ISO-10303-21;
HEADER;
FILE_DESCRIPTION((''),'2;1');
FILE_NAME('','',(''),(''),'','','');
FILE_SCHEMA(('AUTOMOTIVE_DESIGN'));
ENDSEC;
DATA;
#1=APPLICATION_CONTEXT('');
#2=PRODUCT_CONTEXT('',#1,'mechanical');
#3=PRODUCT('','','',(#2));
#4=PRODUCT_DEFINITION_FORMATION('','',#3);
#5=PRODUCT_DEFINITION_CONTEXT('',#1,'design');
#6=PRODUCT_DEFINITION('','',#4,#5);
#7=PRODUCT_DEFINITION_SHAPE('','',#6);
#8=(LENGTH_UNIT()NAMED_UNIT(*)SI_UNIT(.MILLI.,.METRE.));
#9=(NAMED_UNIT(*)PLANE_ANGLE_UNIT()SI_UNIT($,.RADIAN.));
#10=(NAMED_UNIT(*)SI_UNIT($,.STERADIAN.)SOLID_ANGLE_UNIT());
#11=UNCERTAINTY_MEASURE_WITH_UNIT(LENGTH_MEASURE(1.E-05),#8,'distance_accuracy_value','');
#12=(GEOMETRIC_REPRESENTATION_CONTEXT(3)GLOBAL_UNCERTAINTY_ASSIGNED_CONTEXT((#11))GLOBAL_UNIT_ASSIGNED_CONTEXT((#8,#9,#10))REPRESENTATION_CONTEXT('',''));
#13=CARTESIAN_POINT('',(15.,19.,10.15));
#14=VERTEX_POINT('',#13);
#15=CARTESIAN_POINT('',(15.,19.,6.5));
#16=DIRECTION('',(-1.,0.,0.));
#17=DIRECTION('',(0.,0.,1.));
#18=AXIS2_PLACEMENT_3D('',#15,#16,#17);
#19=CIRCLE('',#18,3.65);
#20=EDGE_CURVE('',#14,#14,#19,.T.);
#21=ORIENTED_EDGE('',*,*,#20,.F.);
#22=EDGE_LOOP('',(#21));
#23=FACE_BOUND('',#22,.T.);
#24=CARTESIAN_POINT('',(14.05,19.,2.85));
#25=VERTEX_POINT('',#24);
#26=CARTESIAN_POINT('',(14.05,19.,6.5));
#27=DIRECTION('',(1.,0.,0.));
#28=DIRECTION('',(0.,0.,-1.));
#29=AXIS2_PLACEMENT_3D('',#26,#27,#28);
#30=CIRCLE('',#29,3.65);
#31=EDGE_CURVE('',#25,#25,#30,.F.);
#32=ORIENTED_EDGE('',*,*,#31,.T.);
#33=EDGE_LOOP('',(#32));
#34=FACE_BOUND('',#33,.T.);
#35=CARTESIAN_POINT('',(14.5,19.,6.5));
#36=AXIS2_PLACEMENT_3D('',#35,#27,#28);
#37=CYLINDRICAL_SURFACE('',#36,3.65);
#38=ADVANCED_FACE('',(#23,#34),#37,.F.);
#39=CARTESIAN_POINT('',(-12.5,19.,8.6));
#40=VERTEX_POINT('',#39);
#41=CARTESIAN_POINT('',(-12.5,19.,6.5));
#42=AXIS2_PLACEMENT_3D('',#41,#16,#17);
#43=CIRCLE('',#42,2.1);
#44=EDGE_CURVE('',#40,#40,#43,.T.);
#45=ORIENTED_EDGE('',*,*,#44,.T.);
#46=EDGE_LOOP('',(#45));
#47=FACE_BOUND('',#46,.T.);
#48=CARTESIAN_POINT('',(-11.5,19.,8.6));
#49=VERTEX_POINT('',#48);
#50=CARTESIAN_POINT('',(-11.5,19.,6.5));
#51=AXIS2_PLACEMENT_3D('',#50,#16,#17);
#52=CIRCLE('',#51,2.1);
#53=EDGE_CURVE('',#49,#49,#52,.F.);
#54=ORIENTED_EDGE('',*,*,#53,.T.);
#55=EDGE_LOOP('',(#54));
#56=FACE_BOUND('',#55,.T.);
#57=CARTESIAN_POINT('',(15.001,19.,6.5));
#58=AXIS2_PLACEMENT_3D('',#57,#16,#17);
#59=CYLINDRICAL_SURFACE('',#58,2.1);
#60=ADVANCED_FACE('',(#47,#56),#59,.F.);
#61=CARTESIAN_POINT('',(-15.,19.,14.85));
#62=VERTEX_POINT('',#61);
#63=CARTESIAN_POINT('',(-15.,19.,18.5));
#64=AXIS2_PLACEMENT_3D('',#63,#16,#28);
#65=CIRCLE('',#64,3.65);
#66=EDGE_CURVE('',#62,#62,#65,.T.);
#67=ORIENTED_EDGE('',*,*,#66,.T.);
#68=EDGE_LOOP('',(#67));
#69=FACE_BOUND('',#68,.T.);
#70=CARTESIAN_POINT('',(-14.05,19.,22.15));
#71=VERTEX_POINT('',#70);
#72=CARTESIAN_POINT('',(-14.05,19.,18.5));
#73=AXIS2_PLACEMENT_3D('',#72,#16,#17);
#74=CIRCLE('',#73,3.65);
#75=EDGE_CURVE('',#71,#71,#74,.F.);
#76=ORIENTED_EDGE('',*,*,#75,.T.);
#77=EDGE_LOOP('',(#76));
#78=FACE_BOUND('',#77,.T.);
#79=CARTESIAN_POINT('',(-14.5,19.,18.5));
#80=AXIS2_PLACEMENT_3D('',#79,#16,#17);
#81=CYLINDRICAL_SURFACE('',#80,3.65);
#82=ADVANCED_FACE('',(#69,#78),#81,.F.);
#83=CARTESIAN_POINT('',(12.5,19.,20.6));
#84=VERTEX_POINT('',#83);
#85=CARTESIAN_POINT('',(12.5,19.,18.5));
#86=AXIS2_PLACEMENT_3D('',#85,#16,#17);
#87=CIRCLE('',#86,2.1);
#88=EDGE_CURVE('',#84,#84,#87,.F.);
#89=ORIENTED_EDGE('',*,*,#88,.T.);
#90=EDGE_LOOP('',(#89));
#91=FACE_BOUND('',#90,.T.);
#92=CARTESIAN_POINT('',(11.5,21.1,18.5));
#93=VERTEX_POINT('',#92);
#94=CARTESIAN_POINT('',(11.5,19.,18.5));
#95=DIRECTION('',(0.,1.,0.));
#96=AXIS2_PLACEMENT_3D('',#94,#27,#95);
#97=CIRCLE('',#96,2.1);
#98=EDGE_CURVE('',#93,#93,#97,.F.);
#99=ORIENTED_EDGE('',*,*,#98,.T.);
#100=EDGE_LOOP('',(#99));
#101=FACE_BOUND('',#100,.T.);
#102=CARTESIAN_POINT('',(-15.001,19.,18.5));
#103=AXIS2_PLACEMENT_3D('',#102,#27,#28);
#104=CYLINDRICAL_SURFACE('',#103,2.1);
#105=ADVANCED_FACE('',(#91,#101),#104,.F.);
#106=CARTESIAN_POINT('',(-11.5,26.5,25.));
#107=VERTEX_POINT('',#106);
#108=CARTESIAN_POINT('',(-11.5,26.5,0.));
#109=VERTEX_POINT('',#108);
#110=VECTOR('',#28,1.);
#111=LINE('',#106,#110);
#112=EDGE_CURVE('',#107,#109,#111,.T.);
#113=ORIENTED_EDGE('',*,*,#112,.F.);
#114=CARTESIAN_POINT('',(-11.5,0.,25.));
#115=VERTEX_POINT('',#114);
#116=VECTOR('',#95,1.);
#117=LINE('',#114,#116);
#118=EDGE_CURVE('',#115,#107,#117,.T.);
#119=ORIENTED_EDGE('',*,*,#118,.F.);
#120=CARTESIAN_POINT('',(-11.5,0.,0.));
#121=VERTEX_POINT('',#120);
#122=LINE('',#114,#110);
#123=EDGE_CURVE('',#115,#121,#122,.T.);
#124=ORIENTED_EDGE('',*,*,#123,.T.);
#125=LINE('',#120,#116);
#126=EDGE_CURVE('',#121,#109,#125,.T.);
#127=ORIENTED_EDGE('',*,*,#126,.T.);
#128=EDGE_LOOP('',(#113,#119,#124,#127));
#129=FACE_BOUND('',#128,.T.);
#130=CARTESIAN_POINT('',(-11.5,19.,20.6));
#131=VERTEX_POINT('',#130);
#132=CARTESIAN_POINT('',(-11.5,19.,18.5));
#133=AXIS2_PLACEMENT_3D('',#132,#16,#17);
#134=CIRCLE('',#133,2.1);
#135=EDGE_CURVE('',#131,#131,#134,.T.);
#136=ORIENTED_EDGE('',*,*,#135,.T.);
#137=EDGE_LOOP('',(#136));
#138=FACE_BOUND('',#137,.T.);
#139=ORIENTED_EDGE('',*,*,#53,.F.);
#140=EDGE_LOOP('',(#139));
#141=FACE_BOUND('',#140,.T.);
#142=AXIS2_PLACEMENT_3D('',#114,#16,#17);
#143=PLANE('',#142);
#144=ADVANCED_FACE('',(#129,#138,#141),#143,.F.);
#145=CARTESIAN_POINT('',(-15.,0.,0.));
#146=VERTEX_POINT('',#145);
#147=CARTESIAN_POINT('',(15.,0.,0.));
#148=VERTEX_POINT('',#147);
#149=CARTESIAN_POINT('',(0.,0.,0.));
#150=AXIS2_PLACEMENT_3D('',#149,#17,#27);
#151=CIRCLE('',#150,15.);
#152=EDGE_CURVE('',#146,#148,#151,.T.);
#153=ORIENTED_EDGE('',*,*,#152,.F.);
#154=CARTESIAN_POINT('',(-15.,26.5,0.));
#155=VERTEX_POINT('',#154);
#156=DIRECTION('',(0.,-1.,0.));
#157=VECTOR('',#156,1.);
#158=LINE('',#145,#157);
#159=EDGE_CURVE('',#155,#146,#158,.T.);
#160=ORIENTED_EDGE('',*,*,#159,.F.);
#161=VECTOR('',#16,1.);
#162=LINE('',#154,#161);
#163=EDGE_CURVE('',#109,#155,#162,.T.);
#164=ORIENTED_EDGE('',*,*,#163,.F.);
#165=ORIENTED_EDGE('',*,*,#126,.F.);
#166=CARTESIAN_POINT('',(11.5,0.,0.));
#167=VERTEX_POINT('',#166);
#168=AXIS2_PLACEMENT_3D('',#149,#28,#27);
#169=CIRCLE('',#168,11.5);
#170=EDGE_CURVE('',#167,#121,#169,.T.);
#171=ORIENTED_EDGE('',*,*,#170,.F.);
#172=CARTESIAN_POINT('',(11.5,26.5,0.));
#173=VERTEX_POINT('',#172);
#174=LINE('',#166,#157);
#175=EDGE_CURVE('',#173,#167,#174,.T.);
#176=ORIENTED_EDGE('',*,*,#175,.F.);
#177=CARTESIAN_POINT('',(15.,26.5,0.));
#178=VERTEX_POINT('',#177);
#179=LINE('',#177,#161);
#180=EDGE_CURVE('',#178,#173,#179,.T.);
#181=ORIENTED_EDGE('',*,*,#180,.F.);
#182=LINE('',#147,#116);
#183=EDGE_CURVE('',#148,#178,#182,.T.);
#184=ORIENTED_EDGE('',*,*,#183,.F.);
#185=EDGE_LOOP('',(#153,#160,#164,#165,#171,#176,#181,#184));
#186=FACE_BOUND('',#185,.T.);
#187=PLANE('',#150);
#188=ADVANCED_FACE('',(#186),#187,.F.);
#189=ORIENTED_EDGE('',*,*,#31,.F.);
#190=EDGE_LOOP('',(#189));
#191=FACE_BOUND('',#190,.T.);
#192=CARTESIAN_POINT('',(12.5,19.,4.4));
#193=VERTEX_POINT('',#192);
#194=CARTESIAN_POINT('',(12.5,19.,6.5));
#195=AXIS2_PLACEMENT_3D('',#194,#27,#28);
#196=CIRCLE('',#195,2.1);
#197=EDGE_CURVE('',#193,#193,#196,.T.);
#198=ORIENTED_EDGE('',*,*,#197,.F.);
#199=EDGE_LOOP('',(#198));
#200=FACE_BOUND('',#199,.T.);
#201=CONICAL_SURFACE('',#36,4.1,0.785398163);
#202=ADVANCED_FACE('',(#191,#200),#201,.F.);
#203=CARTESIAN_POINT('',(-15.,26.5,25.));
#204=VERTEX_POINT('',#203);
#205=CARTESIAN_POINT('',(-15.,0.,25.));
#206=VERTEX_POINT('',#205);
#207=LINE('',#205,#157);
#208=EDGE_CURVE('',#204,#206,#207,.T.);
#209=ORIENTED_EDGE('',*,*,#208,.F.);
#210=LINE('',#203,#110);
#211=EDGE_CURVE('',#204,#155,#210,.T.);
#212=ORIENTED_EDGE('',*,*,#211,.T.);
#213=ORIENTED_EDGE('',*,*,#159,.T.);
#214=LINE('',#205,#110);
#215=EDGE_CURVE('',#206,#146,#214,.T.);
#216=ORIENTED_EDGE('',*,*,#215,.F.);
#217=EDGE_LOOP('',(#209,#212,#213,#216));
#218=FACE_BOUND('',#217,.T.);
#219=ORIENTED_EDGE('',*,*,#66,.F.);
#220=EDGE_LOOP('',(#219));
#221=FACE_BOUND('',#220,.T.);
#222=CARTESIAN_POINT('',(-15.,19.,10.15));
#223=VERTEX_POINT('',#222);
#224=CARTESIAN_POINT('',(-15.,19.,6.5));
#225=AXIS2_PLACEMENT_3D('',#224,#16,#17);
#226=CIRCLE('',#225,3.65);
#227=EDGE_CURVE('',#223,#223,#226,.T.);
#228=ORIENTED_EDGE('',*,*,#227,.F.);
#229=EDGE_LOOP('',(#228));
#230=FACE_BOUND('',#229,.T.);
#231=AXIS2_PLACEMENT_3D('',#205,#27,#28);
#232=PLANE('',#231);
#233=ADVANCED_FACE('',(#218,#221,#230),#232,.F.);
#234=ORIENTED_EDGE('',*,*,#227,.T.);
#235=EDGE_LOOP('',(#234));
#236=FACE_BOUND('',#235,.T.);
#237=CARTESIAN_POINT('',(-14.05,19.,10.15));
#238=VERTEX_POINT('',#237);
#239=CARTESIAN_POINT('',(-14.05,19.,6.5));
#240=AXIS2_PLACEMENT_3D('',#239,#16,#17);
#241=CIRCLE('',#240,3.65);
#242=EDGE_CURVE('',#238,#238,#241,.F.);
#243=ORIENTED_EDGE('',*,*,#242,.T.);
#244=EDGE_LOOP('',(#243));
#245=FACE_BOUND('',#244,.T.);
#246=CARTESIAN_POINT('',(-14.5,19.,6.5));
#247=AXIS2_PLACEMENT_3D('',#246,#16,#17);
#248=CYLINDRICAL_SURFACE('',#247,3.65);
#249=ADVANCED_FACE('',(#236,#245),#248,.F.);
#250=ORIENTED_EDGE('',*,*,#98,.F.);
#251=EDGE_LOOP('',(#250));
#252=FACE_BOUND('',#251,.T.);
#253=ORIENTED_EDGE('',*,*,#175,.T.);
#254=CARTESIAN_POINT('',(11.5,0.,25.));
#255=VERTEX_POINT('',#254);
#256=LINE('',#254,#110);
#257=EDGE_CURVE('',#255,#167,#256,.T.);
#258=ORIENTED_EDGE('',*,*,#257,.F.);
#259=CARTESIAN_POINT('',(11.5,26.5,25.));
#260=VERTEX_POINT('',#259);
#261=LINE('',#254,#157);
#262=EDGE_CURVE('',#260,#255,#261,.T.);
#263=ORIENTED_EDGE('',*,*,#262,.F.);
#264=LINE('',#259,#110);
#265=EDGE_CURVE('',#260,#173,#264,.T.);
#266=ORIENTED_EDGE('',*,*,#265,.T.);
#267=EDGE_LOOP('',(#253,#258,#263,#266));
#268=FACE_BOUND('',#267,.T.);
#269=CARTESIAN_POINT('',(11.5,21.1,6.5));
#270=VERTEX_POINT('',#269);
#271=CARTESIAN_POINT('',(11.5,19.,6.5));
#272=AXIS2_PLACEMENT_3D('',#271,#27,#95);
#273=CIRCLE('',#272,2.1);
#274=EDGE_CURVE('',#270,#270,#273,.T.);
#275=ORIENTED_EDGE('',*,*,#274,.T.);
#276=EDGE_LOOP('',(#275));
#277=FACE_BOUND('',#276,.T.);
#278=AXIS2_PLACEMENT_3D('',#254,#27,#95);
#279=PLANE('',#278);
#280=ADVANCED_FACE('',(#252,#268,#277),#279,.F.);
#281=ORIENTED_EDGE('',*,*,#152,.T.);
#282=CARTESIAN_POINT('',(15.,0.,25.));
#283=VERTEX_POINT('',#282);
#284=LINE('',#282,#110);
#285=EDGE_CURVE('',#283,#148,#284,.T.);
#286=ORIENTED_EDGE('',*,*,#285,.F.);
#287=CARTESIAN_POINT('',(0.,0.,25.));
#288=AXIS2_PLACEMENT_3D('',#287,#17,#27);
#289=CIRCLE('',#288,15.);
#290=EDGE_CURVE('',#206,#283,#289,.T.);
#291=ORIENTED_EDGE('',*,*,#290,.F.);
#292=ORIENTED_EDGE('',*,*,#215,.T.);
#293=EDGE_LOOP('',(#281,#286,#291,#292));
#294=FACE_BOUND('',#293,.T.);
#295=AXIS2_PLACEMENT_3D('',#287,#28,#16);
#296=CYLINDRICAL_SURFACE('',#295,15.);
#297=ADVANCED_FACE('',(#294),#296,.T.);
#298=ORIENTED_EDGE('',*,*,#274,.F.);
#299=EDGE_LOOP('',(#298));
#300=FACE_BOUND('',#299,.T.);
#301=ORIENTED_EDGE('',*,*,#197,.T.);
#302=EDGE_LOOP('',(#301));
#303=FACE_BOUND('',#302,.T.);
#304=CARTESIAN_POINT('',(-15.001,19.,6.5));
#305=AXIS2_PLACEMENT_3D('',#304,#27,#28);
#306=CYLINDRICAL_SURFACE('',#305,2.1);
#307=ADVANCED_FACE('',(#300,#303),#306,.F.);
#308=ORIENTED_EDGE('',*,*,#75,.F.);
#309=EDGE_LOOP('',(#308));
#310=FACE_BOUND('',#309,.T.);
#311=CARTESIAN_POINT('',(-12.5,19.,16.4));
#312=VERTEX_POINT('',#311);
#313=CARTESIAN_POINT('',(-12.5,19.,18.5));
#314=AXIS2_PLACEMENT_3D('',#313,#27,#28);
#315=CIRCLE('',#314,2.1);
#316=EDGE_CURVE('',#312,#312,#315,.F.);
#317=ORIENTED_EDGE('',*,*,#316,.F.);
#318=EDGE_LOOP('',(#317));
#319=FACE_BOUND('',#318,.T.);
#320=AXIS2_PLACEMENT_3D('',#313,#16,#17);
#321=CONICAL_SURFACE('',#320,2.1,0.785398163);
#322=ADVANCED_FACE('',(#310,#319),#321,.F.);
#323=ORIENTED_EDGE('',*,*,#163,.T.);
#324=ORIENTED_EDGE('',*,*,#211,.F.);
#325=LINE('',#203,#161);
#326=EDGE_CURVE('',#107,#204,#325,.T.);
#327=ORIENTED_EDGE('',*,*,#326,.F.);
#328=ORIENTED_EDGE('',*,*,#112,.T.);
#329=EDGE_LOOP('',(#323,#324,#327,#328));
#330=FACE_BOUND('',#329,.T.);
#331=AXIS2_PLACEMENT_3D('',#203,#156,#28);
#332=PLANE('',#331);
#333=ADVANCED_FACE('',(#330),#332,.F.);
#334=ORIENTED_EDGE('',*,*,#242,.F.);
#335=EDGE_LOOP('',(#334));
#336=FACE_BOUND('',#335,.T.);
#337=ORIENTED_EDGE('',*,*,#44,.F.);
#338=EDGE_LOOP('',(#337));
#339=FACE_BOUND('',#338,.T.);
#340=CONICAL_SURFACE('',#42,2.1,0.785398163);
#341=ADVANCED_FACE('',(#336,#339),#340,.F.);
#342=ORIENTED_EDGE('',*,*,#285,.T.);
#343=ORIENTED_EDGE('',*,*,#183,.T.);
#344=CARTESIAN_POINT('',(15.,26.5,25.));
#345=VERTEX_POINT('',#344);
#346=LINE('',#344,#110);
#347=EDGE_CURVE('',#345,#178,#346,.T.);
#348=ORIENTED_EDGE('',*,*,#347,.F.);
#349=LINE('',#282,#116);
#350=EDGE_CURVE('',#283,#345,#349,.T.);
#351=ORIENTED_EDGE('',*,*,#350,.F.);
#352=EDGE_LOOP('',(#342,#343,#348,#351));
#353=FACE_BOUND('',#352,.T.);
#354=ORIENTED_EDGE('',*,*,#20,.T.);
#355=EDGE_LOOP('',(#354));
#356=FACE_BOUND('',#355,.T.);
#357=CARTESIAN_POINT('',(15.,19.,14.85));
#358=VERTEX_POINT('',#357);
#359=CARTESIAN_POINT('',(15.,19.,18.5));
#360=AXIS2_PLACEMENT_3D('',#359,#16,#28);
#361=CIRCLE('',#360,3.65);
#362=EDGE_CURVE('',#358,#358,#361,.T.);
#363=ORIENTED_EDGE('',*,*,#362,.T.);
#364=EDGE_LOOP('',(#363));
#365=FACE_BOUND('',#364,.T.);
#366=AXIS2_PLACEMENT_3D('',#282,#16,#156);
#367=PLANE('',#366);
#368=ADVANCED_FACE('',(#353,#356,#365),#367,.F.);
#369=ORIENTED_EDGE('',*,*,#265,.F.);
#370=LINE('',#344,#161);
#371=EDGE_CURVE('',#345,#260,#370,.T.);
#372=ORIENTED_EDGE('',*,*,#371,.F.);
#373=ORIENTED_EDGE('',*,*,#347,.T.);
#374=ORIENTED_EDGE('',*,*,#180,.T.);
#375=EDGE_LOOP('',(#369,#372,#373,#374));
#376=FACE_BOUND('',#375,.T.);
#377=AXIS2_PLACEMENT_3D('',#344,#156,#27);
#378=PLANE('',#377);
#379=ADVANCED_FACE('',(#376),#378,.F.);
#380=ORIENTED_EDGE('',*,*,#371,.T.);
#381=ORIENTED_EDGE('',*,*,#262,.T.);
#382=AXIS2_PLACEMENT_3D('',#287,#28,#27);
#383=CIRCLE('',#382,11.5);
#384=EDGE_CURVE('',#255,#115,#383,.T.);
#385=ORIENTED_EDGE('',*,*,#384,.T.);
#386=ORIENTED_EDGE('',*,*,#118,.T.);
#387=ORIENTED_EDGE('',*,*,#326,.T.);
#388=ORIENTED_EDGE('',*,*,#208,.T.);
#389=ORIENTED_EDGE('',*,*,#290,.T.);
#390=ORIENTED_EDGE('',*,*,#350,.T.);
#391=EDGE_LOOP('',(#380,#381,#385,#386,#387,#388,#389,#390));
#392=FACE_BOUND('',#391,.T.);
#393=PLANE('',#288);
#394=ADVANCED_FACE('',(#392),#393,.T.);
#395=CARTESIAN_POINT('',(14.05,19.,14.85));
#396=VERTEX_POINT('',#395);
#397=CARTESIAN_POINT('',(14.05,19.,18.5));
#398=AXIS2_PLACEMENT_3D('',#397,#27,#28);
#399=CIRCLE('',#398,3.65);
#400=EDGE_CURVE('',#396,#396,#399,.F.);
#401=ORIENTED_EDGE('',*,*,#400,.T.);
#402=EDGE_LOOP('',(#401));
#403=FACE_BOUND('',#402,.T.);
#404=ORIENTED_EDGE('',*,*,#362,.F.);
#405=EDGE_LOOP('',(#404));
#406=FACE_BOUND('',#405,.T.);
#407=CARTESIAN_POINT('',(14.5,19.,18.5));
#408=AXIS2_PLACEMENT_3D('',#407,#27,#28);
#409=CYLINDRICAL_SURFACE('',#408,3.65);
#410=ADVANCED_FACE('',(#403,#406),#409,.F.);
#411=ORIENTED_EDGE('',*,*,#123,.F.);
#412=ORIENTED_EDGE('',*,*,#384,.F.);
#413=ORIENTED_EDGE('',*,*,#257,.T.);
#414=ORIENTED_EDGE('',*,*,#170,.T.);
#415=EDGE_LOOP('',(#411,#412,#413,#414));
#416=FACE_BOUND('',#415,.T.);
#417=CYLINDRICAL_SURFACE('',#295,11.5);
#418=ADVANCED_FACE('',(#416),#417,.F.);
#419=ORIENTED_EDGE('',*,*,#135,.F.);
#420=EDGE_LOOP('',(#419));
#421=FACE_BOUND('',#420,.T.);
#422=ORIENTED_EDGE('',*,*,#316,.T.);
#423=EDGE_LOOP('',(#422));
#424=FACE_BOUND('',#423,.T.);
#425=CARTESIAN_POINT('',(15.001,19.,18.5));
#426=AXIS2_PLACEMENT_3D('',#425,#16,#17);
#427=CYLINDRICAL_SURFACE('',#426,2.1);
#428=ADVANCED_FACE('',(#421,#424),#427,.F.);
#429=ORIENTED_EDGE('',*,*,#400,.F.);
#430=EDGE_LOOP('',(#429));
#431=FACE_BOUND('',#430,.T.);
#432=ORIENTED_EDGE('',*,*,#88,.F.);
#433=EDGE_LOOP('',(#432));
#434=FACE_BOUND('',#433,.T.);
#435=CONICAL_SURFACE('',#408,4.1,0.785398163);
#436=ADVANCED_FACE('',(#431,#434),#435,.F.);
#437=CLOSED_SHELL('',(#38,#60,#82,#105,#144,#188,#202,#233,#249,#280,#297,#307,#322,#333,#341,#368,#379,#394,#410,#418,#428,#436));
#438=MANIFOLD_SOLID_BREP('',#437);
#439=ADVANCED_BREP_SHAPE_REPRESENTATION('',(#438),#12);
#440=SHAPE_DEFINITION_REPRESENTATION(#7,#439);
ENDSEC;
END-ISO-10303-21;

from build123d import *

# Parameters (mm, degrees)
EXTRUDE_1391_DEPTH               = 25
CUT_EXTRUDE_1919_REACH           = 49.194
SKETCH_1505_R                    = 2.1
SKETCH_2_3_R                     = 3.65
SKETCH_2_3_R_2                   = 2.1
CUT_EXTRUDE_1959_DEPTH           = 0.5
CHAMFER_2009_SIZE                = 2
CHAMFER_2009_OF_MIRROR_2081_SIZE = 2


with BuildPart() as part:
    # Sketch 313 → Extrude 1391 (new body)
    with BuildSketch(Plane.XY):
        with BuildLine():
            Line((-11.5, 0), (-11.5, 26.5))
            Line((-11.5, 26.5), (-15, 26.5))
            Line((-15, 26.5), (-15, 0))
            ThreePointArc((-15, 0), (0, -15), (15, 0))
            Line((15, 0), (15, 26.5))
            Line((15, 26.5), (11.5, 26.5))
            Line((11.5, 26.5), (11.5, 0))
            ThreePointArc((11.5, 0), (0, -11.5), (-11.5, 0))
        make_face()
    extrude(amount=EXTRUDE_1391_DEPTH)

    # Sketch 1505 → Cut-Extrude 1919 (cut, up to next)
    with BuildSketch(Plane.ZY.offset(15), mode=Mode.PRIVATE) as cut_extrude_1919_sk1:
        with Locations((6.5, 19)):
            Circle(SKETCH_1505_R)
    cut_extrude_1919_tool1 = extrude(cut_extrude_1919_sk1.sketch, amount=-CUT_EXTRUDE_1919_REACH, mode=Mode.PRIVATE) & part.part
    # Sketch 1505 → Cut-Extrude 1919 (cut, up to next)
    with BuildSketch(Plane.ZY.offset(15), mode=Mode.PRIVATE) as cut_extrude_1919_sk2:
        with Locations((18.5, 19)):
            Circle(SKETCH_1505_R)
    cut_extrude_1919_tool2 = extrude(cut_extrude_1919_sk2.sketch, amount=-CUT_EXTRUDE_1919_REACH, mode=Mode.PRIVATE) & part.part
    cut_extrude_1919_1 = cut_extrude_1919_tool1.solids().sort_by_distance((-15, 19, 6.5))[0]
    add(cut_extrude_1919_1, mode=Mode.SUBTRACT)
    cut_extrude_1919_2 = cut_extrude_1919_tool2.solids().sort_by_distance((-15, 19, 18.5))[0]
    add(cut_extrude_1919_2, mode=Mode.SUBTRACT)
    cut_extrude_1919 = cut_extrude_1919_1 + cut_extrude_1919_2  # Cut-Extrude 1919 as one shape, for the pattern or mirror that repeats it

    # Эскиз2<3> → Cut-Extrude 1959 (cut)
    # profile 1 of 2: a face of its own
    with BuildSketch(Plane.ZY.offset(15)):
        with Locations((6.5, 19)):
            Circle(SKETCH_2_3_R)
        with Locations((6.5, 19)):
            Circle(SKETCH_2_3_R_2, mode=Mode.SUBTRACT)
    # profile 2 of 2: a face of its own
    with BuildSketch(Plane.ZY.offset(15)):
        with Locations(Location((18.5, 19, 0), (0, 0, 180))):
            Circle(SKETCH_2_3_R)
        with Locations((18.5, 19)):
            Circle(SKETCH_2_3_R_2, mode=Mode.SUBTRACT)
    cut_extrude_1959 = extrude(amount=-CUT_EXTRUDE_1959_DEPTH, mode=Mode.SUBTRACT)

    # Chamfer 2009
    # the kernel refuses this chamfer: 2 mm, written as the material it takes off along each edge
    with BuildSketch(Plane(origin=(-14.5, 19, 18.5), x_dir=(0, 0, 1), z_dir=(0, -1, 0))) as chamfer_2009_piece_1_section:
        Polygon((2.1, -CHAMFER_2009_SIZE), (2.1 + CHAMFER_2009_SIZE, 0), (2.1, 0), align=None)
    chamfer_2009_piece_1 = revolve(axis=Axis((-14.5, 19, 18.5), (-1, 0, 0)), mode=Mode.PRIVATE)
    chamfer_2009_piece_1 = chamfer_2009_piece_1 & Plane(origin=(-13.269804267, 19, 18.5), x_dir=(0, 0, -1), z_dir=(-1, 0, 0)) * Cylinder(3.65, 17, mode=Mode.PRIVATE)
    add(chamfer_2009_piece_1, mode=Mode.SUBTRACT)
    with BuildSketch(Plane(origin=(-14.5, 19, 6.5), x_dir=(0, 0, 1), z_dir=(0, -1, 0))) as chamfer_2009_piece_2_section:
        Polygon((2.1, -CHAMFER_2009_SIZE), (2.1 + CHAMFER_2009_SIZE, 0), (2.1, 0), align=None)
    chamfer_2009_piece_2 = revolve(axis=Axis((-14.5, 19, 6.5), (-1, 0, 0)), mode=Mode.PRIVATE)
    chamfer_2009_piece_2 = chamfer_2009_piece_2 & Plane(origin=(-13.269804267, 19, 6.5), x_dir=(0, 0, 1), z_dir=(-1, 0, 0)) * Cylinder(3.65, 17, mode=Mode.PRIVATE)
    add(chamfer_2009_piece_2, mode=Mode.SUBTRACT)

    # Mirror 2081: Cut-Extrude 1919, Cut-Extrude 1959 across plane
    add(cut_extrude_1919.mirror(Plane(origin=(0, 0, 0), x_dir=(0, 0, 1), z_dir=(1, 0, 0))), mode=Mode.SUBTRACT)
    add(cut_extrude_1959.mirror(Plane(origin=(0, 0, 0), x_dir=(0, 0, 1), z_dir=(1, 0, 0))), mode=Mode.SUBTRACT)

    # Chamfer 2009 of Mirror 2081
    # the kernel refuses this chamfer: 2 mm, written as the material it takes off along each edge
    with BuildSketch(Plane(origin=(14.5, 19, 18.5), x_dir=(0, 0, 1), z_dir=(0, -1, 0))) as chamfer_2009_of_mirror_2081_piece_1_section:
        Polygon((2.1, CHAMFER_2009_OF_MIRROR_2081_SIZE), (2.1 + CHAMFER_2009_OF_MIRROR_2081_SIZE, 0), (2.1, 0), align=None)
    chamfer_2009_of_mirror_2081_piece_1 = revolve(axis=Axis((14.5, 19, 18.5), (-1, 0, 0)), mode=Mode.PRIVATE)
    chamfer_2009_of_mirror_2081_piece_1 = chamfer_2009_of_mirror_2081_piece_1 & Plane(origin=(13.269804267, 19, 18.5), x_dir=(0, 0, -1), z_dir=(1, 0, 0)) * Cylinder(3.65, 17, mode=Mode.PRIVATE)
    add(chamfer_2009_of_mirror_2081_piece_1, mode=Mode.SUBTRACT)
    with BuildSketch(Plane(origin=(14.5, 19, 6.5), x_dir=(0, 0, 1), z_dir=(0, -1, 0))) as chamfer_2009_of_mirror_2081_piece_2_section:
        Polygon((2.1, CHAMFER_2009_OF_MIRROR_2081_SIZE), (2.1 + CHAMFER_2009_OF_MIRROR_2081_SIZE, 0), (2.1, 0), align=None)
    chamfer_2009_of_mirror_2081_piece_2 = revolve(axis=Axis((14.5, 19, 6.5), (-1, 0, 0)), mode=Mode.PRIVATE)
    chamfer_2009_of_mirror_2081_piece_2 = chamfer_2009_of_mirror_2081_piece_2 & Plane(origin=(13.269804267, 19, 6.5), x_dir=(0, 0, 1), z_dir=(1, 0, 0)) * Cylinder(3.65, 17, mode=Mode.PRIVATE)
    add(chamfer_2009_of_mirror_2081_piece_2, mode=Mode.SUBTRACT)


solid = part.part
